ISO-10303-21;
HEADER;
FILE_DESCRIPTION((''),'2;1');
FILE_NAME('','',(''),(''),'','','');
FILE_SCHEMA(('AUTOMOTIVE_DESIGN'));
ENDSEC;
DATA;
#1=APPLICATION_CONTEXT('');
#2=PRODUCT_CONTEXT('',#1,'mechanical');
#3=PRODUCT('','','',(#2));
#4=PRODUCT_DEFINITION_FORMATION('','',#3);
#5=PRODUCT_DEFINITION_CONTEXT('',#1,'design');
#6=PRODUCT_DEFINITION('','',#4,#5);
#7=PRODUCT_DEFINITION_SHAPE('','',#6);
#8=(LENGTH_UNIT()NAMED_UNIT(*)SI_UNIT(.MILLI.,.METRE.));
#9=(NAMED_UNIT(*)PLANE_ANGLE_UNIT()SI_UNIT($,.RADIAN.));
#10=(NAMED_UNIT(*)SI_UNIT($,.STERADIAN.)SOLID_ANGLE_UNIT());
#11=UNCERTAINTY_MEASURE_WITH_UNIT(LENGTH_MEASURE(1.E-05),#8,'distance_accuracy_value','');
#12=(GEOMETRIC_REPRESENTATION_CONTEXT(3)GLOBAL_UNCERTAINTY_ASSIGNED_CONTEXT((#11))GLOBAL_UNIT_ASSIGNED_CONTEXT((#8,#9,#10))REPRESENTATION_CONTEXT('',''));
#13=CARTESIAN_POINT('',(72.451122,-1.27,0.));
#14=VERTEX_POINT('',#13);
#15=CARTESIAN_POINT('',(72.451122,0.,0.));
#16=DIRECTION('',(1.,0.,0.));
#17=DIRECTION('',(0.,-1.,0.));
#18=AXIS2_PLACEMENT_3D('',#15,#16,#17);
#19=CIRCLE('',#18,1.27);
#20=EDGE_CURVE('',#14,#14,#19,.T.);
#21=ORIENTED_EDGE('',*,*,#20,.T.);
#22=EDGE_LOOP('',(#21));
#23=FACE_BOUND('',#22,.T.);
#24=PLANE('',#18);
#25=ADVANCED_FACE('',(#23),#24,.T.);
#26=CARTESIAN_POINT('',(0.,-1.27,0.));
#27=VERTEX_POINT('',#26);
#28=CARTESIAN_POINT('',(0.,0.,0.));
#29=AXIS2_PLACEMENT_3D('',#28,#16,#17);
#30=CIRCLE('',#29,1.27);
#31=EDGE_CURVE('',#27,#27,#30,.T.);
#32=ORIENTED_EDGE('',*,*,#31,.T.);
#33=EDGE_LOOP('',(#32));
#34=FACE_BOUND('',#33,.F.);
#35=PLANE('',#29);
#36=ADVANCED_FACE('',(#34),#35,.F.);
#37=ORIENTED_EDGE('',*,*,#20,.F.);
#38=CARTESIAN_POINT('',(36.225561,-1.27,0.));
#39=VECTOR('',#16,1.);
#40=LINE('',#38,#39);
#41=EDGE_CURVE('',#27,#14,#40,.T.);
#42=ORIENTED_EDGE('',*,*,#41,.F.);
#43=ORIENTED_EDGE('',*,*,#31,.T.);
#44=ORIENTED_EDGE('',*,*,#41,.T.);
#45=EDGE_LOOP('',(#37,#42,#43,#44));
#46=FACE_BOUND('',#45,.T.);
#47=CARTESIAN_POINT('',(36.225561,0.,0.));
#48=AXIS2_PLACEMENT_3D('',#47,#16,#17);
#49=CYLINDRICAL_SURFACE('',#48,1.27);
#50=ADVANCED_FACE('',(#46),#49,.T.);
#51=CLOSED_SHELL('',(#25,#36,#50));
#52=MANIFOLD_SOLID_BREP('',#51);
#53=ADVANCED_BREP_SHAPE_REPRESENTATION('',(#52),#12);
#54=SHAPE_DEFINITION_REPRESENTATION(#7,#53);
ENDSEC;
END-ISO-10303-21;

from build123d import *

# Parameters (mm, degrees)
F0_W = 72.4511221051
F0_H = 1.27


# Not quite as in the source:
# - a feature of the source that left no trace in its solid (it failed there, or was rolled back) is left out


with BuildPart() as f1:
    # F0 (on Top) → F1 (revolve)
    with BuildSketch(Plane.XY):
        with Locations((36.2255610526, -0.635)):
            Rectangle(F0_W, F0_H)
    revolve(axis=Axis((36.2255610526, 0, 0), (1, 0, 0)))


solid = f1.part
